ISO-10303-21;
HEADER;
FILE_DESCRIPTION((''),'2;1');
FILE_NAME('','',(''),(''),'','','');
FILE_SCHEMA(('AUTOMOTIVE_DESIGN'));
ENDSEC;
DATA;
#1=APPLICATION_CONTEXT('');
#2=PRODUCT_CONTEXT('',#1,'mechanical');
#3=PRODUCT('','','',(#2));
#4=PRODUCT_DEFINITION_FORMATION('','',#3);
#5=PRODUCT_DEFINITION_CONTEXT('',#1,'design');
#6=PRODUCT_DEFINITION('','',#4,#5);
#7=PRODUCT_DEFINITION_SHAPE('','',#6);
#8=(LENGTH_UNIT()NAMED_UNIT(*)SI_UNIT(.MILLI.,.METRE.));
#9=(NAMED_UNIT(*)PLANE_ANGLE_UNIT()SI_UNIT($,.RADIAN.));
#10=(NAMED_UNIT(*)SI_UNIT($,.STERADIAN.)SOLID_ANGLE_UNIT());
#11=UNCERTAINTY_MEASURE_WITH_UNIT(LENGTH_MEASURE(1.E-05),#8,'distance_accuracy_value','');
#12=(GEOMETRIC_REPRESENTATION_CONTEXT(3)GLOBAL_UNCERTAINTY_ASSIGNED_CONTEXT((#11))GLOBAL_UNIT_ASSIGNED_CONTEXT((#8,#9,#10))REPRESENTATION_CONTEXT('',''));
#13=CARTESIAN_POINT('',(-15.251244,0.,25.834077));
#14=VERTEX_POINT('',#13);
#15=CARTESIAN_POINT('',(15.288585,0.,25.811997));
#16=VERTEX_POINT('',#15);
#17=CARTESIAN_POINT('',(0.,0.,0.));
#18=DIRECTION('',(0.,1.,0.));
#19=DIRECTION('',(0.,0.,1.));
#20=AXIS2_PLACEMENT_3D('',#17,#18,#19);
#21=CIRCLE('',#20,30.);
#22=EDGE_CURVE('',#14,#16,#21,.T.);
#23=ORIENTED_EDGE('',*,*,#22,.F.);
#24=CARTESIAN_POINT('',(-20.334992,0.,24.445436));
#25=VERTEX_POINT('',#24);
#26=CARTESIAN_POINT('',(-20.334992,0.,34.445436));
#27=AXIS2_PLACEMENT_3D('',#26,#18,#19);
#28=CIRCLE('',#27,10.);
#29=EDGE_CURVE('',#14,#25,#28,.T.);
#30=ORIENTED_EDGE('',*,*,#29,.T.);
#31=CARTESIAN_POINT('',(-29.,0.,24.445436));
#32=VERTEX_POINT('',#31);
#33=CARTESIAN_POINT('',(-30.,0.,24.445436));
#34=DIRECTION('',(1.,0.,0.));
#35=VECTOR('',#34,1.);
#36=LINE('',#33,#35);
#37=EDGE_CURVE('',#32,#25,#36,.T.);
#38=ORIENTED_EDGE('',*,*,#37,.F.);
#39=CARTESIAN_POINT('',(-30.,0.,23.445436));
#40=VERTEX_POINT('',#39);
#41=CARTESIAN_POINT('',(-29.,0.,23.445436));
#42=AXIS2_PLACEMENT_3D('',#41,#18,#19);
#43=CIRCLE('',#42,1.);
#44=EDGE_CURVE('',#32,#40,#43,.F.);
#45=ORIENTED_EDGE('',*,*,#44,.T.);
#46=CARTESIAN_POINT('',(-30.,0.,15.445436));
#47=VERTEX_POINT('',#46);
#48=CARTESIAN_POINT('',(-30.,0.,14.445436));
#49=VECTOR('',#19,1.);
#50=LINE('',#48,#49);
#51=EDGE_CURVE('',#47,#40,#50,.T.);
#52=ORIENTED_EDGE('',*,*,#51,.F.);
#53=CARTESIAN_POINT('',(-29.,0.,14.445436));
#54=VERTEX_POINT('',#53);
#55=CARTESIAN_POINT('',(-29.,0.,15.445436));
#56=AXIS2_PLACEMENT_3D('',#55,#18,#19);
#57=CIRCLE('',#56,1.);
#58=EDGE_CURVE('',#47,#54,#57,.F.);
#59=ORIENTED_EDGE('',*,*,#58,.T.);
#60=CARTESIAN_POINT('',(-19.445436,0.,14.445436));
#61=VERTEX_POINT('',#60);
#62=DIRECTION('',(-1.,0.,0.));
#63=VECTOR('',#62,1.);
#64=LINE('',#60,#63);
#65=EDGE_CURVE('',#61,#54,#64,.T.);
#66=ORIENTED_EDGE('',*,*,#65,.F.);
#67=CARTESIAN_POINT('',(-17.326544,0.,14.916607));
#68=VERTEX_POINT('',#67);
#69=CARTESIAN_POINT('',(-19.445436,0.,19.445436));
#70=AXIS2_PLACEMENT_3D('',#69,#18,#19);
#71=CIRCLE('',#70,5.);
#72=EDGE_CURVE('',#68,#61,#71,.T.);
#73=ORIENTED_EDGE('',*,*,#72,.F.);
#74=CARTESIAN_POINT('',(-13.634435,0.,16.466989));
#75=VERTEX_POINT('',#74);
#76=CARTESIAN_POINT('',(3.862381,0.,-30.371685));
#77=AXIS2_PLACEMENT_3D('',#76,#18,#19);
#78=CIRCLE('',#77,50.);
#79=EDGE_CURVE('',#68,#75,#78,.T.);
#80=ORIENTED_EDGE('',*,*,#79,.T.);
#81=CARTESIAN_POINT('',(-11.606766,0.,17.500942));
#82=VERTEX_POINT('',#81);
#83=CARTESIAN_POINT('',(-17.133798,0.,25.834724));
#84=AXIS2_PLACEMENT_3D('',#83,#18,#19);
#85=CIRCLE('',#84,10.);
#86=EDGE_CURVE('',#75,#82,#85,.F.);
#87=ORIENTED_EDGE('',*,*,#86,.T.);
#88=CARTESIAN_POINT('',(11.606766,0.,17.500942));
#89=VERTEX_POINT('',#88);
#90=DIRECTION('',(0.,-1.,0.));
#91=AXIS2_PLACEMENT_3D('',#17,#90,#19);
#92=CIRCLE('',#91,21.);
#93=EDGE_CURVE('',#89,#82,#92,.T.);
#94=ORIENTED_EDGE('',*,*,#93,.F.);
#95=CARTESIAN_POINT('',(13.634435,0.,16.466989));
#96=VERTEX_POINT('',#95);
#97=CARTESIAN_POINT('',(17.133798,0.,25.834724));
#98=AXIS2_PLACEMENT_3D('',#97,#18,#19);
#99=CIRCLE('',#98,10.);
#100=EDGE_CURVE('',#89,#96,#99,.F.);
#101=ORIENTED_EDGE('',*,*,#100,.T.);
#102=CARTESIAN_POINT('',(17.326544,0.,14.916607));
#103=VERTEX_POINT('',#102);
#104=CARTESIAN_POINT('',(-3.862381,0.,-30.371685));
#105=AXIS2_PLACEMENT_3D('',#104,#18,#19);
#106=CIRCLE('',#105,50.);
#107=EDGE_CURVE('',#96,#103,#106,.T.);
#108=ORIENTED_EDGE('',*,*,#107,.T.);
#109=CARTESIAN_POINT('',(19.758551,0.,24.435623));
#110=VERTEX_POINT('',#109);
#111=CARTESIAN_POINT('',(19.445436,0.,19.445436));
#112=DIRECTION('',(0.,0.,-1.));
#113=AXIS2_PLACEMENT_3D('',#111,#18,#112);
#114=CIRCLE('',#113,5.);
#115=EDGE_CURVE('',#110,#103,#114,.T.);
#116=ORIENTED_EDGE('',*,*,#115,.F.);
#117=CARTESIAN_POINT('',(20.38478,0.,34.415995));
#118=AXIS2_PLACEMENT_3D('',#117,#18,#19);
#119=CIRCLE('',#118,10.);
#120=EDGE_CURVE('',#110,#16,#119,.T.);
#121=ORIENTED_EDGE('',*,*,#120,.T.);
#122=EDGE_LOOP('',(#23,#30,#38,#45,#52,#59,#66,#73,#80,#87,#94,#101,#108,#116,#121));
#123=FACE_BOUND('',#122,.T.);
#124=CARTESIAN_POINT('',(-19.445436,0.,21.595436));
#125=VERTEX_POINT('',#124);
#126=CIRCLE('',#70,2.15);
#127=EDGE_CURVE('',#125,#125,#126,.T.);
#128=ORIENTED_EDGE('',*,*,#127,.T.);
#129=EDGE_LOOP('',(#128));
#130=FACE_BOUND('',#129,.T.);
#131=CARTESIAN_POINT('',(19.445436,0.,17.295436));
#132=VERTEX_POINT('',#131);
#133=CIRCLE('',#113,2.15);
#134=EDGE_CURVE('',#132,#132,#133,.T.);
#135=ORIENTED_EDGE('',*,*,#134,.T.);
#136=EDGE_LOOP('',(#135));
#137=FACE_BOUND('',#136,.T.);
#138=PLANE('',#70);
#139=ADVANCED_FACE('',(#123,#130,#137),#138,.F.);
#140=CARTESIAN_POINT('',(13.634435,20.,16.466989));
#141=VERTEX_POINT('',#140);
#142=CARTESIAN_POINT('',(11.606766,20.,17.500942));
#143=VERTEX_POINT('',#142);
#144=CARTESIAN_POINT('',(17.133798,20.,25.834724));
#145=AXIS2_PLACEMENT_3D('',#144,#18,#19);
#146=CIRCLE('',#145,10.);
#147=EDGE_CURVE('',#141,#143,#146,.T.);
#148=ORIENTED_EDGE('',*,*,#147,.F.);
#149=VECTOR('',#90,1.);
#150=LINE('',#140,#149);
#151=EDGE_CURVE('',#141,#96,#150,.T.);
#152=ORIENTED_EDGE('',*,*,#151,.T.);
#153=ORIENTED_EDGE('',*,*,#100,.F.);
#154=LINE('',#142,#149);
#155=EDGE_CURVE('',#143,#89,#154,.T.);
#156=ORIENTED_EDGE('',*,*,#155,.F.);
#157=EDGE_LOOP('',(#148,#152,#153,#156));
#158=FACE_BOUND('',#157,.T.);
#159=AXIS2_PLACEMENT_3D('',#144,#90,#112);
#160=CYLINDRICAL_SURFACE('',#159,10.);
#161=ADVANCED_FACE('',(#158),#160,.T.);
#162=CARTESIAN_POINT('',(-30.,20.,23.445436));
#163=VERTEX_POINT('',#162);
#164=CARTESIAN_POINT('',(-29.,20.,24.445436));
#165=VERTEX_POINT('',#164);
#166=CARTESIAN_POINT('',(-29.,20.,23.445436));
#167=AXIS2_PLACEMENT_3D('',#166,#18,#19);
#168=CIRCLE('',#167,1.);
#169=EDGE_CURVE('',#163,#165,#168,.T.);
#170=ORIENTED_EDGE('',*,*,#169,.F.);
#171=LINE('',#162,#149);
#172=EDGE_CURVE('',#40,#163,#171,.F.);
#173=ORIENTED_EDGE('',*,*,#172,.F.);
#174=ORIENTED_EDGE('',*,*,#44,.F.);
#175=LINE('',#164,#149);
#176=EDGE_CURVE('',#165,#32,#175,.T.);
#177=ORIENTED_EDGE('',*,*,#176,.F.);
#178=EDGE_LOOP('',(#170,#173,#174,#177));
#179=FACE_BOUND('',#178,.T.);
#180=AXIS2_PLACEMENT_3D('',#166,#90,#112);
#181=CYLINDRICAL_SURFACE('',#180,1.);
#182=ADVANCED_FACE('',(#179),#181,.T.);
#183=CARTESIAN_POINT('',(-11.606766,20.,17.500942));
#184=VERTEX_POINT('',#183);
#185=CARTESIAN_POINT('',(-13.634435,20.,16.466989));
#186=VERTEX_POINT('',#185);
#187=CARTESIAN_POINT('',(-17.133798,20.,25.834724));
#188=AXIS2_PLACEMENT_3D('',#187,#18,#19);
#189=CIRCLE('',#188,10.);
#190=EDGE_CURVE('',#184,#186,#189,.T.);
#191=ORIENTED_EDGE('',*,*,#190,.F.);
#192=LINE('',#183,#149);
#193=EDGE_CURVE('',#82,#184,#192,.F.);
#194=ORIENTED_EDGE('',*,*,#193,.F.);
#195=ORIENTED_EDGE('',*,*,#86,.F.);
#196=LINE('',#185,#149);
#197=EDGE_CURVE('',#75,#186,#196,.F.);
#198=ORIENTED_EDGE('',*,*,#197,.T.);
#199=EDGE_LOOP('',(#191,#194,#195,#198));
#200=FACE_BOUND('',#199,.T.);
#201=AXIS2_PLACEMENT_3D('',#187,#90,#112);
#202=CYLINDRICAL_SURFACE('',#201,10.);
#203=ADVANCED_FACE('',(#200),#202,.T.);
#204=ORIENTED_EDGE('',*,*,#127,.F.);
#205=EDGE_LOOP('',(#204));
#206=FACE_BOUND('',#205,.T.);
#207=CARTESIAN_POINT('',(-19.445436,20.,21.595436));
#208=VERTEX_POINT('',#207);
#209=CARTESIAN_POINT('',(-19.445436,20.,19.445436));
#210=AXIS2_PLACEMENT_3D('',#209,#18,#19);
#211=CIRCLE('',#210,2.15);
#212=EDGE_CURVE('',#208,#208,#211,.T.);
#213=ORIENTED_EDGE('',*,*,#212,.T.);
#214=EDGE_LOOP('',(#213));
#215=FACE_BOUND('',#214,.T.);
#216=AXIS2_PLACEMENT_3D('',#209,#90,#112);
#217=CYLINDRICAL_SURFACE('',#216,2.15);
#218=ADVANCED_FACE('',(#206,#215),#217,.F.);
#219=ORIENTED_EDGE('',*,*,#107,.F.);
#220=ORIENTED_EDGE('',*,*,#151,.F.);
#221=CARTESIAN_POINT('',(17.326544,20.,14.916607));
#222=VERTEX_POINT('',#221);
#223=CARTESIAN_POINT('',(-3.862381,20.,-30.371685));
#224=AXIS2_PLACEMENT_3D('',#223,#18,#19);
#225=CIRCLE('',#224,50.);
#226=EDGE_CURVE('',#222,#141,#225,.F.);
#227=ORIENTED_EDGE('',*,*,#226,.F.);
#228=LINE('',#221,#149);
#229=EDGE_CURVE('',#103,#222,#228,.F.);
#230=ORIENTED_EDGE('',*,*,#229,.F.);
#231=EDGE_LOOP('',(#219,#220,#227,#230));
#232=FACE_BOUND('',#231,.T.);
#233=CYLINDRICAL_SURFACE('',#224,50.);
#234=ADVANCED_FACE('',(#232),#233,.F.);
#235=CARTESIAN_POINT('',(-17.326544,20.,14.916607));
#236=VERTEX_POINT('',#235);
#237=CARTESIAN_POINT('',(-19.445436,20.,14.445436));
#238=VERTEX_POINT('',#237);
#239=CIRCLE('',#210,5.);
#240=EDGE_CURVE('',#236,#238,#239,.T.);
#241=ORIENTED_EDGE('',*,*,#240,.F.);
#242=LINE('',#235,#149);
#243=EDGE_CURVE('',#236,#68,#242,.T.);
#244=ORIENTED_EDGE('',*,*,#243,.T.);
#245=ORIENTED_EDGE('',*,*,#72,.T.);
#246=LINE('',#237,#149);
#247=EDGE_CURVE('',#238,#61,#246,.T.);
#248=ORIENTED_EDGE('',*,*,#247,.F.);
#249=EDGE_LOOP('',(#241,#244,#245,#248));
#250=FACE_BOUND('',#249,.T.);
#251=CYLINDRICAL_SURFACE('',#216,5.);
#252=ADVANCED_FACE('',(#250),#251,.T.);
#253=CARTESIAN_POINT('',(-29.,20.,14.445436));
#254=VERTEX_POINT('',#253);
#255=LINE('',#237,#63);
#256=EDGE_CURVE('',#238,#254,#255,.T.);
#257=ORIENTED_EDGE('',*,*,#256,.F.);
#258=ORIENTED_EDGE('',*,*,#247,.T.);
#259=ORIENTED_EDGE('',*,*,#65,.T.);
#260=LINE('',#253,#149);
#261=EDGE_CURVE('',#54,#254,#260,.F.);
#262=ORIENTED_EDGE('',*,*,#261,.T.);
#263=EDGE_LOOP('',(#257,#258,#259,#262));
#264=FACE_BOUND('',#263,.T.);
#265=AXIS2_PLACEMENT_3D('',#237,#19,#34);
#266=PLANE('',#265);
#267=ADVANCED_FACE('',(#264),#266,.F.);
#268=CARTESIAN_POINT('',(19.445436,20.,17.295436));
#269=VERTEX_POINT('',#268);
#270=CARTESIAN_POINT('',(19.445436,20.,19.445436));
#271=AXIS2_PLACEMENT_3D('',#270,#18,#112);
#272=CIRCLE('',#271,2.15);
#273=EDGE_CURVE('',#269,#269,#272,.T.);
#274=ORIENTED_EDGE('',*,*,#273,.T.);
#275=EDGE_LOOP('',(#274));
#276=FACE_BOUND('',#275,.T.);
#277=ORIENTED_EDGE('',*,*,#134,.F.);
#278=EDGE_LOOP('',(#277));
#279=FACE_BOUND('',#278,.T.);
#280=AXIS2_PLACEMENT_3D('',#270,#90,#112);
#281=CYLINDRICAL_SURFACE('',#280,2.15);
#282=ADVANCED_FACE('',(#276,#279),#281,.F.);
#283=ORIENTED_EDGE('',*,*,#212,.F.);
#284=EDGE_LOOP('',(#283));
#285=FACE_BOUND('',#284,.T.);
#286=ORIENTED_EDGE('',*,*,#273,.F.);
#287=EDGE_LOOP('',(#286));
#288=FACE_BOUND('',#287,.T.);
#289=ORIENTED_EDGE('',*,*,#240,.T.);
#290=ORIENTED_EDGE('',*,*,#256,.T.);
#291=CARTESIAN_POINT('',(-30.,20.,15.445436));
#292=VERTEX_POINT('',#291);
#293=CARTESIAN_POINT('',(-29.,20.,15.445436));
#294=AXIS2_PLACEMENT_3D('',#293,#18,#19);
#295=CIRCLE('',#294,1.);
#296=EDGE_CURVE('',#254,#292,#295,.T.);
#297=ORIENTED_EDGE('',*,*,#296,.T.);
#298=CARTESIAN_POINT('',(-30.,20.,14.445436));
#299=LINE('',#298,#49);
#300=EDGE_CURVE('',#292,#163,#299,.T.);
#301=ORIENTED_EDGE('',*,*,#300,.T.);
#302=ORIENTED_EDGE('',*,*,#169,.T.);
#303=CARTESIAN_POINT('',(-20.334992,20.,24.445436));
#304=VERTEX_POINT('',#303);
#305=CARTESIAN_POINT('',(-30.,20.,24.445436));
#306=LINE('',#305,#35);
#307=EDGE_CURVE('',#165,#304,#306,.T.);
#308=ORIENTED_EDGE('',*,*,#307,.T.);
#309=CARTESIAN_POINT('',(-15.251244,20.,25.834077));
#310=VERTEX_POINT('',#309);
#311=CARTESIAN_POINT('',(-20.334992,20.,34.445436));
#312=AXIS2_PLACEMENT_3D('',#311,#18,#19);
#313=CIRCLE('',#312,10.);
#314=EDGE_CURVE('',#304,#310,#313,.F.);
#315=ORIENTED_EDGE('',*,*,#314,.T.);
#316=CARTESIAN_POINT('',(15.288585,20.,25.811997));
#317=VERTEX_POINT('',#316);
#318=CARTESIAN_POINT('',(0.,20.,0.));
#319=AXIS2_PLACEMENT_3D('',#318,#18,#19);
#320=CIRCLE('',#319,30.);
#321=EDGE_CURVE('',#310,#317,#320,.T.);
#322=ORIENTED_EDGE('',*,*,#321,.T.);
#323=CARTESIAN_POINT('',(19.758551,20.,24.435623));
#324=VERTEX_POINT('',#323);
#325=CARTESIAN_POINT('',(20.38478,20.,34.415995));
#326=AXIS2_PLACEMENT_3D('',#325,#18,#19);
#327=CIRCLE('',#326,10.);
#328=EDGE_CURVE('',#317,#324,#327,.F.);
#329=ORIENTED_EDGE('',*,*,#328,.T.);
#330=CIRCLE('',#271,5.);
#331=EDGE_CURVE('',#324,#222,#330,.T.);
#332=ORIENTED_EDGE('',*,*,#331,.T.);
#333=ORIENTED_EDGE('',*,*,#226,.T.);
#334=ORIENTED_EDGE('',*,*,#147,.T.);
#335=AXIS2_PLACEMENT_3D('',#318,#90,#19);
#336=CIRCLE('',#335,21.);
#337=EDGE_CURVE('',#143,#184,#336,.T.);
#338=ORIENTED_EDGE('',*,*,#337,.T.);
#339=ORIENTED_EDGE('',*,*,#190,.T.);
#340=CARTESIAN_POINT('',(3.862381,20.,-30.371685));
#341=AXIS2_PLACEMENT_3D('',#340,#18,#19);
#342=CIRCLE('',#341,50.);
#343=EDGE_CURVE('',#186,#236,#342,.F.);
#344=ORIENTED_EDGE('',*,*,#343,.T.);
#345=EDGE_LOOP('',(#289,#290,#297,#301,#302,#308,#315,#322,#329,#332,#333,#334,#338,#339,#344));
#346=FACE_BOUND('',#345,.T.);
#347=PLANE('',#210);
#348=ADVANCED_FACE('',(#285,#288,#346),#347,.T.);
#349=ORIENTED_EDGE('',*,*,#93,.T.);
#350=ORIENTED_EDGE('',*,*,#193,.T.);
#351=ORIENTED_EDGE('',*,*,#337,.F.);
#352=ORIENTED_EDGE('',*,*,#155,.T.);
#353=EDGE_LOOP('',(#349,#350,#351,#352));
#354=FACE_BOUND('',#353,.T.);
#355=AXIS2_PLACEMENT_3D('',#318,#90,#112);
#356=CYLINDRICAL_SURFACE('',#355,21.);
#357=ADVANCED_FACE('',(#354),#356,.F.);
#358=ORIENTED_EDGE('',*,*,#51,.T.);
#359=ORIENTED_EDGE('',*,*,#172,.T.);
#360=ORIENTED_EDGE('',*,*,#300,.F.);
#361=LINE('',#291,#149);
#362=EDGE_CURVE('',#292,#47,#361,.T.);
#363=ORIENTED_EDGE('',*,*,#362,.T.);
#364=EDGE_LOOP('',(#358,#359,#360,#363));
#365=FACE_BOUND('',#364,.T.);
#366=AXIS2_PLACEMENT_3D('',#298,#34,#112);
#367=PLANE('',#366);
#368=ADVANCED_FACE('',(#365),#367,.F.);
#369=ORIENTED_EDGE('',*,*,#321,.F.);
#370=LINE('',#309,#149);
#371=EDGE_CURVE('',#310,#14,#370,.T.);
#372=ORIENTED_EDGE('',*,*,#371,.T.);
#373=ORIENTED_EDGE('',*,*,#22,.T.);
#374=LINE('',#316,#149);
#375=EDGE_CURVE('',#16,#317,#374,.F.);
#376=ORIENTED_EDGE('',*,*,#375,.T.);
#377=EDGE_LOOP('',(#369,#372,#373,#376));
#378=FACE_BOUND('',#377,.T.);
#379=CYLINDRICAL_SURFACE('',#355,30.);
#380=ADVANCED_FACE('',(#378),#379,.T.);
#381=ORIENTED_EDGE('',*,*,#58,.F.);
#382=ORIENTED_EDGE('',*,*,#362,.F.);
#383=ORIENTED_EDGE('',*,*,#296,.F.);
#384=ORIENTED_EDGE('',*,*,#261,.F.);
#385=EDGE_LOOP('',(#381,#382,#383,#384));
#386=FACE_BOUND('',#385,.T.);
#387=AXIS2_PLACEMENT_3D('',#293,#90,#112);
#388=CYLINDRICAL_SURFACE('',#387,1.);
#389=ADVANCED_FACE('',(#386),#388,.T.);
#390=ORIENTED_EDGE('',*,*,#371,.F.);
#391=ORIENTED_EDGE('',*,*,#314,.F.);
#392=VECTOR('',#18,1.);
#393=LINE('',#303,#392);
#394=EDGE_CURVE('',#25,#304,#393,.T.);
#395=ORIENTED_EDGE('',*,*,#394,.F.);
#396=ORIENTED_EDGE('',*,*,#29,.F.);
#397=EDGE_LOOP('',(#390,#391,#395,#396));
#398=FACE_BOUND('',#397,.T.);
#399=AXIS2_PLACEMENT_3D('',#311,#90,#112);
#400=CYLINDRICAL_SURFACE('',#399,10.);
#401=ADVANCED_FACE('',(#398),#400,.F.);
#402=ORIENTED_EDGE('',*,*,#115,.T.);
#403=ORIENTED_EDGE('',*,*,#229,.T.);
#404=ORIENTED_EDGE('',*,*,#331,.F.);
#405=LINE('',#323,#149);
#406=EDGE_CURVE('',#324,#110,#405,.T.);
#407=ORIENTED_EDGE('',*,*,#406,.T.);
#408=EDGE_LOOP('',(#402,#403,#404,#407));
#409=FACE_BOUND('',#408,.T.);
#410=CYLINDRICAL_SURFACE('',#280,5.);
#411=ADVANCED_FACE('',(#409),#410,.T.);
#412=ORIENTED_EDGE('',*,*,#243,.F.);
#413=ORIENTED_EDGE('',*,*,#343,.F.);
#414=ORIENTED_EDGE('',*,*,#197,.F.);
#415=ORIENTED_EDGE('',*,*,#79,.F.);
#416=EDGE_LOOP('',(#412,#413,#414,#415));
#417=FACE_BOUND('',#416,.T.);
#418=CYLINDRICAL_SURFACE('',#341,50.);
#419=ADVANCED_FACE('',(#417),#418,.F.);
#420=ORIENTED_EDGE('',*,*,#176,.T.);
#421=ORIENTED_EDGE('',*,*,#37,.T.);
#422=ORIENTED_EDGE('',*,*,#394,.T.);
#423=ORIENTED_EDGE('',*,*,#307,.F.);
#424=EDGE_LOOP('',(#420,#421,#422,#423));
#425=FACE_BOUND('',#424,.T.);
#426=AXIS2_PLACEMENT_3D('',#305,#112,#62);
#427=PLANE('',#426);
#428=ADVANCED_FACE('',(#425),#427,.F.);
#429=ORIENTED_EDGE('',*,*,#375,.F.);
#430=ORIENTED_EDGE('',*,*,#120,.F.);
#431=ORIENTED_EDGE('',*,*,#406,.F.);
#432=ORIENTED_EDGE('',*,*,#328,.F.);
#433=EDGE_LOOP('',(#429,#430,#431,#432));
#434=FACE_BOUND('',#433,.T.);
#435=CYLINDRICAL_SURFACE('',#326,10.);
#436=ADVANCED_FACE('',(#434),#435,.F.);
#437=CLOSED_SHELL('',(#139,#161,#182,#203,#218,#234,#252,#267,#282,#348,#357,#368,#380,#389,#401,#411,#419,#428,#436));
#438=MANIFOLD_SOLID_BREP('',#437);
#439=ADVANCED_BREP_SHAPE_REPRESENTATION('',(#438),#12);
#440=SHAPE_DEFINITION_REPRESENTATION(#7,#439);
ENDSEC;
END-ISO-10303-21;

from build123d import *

# Parameters (mm, degrees)
SKETCH_1_R      = 2.15
EXTRUDE_1_DEPTH = 20
FILLET_1_R      = 10
FILLET_2_R      = 50
FILLET_3_R      = 1


with BuildPart() as part:
    # ｽｹｯﾁ1 → ﾎﾞｽ - 押し出し1 (new body)
    with BuildSketch(Plane(origin=(0, 0, 0), x_dir=(1, 0, 0), z_dir=(0, 1, 0))):
        with BuildLine():
            Line((-30, -24.445436483), (-19.445436483, -24.445436483))
            ThreePointArc((-19.445436483, -24.445436483), (-18.602258519, -24.373828809), (-17.78323176, -24.161056851))
            ThreePointArc((-17.78323176, -24.161056851), (0, -30), (17.78323176, -24.161056851))
            ThreePointArc((17.78323176, -24.161056851), (24.321347518, -18.338417254), (15.909902577, -15.909902577))
            Line((15.909902577, -15.909902577), (14.849242405, -14.849242405))
            ThreePointArc((14.849242405, -14.849242405), (0, -21), (-14.849242405, -14.849242405))
            Line((-14.849242405, -14.849242405), (-15.909902577, -15.909902577))
            ThreePointArc((-15.909902577, -15.909902577), (-17.532019321, -14.82603882), (-19.445436483, -14.445436483))
            Line((-19.445436483, -14.445436483), (-30, -14.445436483))
            Line((-30, -14.445436483), (-30, -24.445436483))
        make_face()
        with Locations(Location((-19.445436483, -19.445436483, 0), (0, 0, 270))):
            Circle(SKETCH_1_R, mode=Mode.SUBTRACT)
        with Locations(Location((19.445436483, -19.445436483, 0), (0, 0, 90))):
            Circle(SKETCH_1_R, mode=Mode.SUBTRACT)
    extrude(amount=EXTRUDE_1_DEPTH)

    # ﾌｨﾚｯﾄ1
    # the kernel refuses this fillet: 10 mm, written as the material it adds along each edge
    with BuildSketch(Plane(origin=(17.78323176, 0, 24.161056851), x_dir=(-0.8339213468601729, 0, 0.5518833094512962), z_dir=(0, 1, 0))) as fillet_1_piece_1:
        with BuildLine():
            CenterArc((3.490042654, 9.987563289), FILLET_1_R, 240.094065847, 27.048110546)
            ThreePointArc((-1.495732566, 1.319112133), (-0.681431037, 0.734886554), (0, 0))
            ThreePointArc((0, 0), (1.495732566, 0.037310133), (2.991465132, 0))
        make_face()
    extrude(amount=20)
    with BuildSketch(Plane(origin=(-17.78323176, 0, 24.161056851), x_dir=(-0.9938473156865714, 0, 0.11075880598217346), z_dir=(0, 1, 0))) as fillet_1_piece_2:
        with BuildLine():
            CenterArc((3.675145817, 9.938473157), FILLET_1_R, 233.085304015, 30.555636739)
            Line((-2.331107377, 1.943166873), (-2.931732696, 1.143636244))
            ThreePointArc((-2.931732696, 1.143636244), (-1.781263353, 0.232951381), (-0.678328899, -0.734758399))
            Line((-0.678328899, -0.734758399), (0.225936244, -0.974142091))
            ThreePointArc((0.225936244, -0.974142091), (1.572716444, -0.895321193), (2.456798951, -0.993847316))
            Line((2.456798951, -0.993847316), (2.567557757, 0))
        make_face()
    extrude(amount=20)
    # the kernel refuses this fillet: 10 mm, written as the material it takes off along each edge
    with BuildSketch(Plane(origin=(-14.849242405, -10.471736153, 14.849242405), x_dir=(-0.707106781186226, 0, 0.7071067811868691), z_dir=(0, 1, 0))) as fillet_1_2_piece_1:
        with BuildLine():
            CenterArc((9.383333333, 6.15248369), FILLET_1_R, 191.447340283, 26.522629156)
            ThreePointArc((-0.417741935, 4.167811532), (-0.104696468, 2.094347231), (0, 0))
            Line((0, 0), (1.5, 0))
        make_face()
    extrude(amount=40.943472307, mode=Mode.SUBTRACT)
    with BuildSketch(Plane(origin=(14.849242405, -10.471736153, 14.849242405), x_dir=(-0.7741018071953127, 0, 0.6330611282466734), z_dir=(0, 1, 0))) as fillet_1_2_piece_2:
        with BuildLine():
            CenterArc((5.186002666, 9.950144539), FILLET_1_R, 237.753700702, 26.522629156)
            Line((-0.149596231, 1.492521681), (0, 0))
            ThreePointArc((0, 0), (2.094347231, 0.104696468), (4.188694461, 0))
        make_face()
    extrude(amount=40.943472307, mode=Mode.SUBTRACT)

    # ﾌｨﾚｯﾄ2
    fillet_2_edges = [part.edges().sort_by_distance(p)[0] for p in [
        (-15.909902577, 10, 15.909902577),
        (15.909902577, 10, 15.909902577),
    ]]
    fillet(fillet_2_edges, radius=FILLET_2_R)

    # ﾌｨﾚｯﾄ3
    fillet_3_edges = [part.edges().sort_by_distance(p)[0] for p in [
        (-30, 10, 14.445436483),
        (-30, 10, 24.445436483),
    ]]
    fillet(fillet_3_edges, radius=FILLET_3_R)


solid = part.part
